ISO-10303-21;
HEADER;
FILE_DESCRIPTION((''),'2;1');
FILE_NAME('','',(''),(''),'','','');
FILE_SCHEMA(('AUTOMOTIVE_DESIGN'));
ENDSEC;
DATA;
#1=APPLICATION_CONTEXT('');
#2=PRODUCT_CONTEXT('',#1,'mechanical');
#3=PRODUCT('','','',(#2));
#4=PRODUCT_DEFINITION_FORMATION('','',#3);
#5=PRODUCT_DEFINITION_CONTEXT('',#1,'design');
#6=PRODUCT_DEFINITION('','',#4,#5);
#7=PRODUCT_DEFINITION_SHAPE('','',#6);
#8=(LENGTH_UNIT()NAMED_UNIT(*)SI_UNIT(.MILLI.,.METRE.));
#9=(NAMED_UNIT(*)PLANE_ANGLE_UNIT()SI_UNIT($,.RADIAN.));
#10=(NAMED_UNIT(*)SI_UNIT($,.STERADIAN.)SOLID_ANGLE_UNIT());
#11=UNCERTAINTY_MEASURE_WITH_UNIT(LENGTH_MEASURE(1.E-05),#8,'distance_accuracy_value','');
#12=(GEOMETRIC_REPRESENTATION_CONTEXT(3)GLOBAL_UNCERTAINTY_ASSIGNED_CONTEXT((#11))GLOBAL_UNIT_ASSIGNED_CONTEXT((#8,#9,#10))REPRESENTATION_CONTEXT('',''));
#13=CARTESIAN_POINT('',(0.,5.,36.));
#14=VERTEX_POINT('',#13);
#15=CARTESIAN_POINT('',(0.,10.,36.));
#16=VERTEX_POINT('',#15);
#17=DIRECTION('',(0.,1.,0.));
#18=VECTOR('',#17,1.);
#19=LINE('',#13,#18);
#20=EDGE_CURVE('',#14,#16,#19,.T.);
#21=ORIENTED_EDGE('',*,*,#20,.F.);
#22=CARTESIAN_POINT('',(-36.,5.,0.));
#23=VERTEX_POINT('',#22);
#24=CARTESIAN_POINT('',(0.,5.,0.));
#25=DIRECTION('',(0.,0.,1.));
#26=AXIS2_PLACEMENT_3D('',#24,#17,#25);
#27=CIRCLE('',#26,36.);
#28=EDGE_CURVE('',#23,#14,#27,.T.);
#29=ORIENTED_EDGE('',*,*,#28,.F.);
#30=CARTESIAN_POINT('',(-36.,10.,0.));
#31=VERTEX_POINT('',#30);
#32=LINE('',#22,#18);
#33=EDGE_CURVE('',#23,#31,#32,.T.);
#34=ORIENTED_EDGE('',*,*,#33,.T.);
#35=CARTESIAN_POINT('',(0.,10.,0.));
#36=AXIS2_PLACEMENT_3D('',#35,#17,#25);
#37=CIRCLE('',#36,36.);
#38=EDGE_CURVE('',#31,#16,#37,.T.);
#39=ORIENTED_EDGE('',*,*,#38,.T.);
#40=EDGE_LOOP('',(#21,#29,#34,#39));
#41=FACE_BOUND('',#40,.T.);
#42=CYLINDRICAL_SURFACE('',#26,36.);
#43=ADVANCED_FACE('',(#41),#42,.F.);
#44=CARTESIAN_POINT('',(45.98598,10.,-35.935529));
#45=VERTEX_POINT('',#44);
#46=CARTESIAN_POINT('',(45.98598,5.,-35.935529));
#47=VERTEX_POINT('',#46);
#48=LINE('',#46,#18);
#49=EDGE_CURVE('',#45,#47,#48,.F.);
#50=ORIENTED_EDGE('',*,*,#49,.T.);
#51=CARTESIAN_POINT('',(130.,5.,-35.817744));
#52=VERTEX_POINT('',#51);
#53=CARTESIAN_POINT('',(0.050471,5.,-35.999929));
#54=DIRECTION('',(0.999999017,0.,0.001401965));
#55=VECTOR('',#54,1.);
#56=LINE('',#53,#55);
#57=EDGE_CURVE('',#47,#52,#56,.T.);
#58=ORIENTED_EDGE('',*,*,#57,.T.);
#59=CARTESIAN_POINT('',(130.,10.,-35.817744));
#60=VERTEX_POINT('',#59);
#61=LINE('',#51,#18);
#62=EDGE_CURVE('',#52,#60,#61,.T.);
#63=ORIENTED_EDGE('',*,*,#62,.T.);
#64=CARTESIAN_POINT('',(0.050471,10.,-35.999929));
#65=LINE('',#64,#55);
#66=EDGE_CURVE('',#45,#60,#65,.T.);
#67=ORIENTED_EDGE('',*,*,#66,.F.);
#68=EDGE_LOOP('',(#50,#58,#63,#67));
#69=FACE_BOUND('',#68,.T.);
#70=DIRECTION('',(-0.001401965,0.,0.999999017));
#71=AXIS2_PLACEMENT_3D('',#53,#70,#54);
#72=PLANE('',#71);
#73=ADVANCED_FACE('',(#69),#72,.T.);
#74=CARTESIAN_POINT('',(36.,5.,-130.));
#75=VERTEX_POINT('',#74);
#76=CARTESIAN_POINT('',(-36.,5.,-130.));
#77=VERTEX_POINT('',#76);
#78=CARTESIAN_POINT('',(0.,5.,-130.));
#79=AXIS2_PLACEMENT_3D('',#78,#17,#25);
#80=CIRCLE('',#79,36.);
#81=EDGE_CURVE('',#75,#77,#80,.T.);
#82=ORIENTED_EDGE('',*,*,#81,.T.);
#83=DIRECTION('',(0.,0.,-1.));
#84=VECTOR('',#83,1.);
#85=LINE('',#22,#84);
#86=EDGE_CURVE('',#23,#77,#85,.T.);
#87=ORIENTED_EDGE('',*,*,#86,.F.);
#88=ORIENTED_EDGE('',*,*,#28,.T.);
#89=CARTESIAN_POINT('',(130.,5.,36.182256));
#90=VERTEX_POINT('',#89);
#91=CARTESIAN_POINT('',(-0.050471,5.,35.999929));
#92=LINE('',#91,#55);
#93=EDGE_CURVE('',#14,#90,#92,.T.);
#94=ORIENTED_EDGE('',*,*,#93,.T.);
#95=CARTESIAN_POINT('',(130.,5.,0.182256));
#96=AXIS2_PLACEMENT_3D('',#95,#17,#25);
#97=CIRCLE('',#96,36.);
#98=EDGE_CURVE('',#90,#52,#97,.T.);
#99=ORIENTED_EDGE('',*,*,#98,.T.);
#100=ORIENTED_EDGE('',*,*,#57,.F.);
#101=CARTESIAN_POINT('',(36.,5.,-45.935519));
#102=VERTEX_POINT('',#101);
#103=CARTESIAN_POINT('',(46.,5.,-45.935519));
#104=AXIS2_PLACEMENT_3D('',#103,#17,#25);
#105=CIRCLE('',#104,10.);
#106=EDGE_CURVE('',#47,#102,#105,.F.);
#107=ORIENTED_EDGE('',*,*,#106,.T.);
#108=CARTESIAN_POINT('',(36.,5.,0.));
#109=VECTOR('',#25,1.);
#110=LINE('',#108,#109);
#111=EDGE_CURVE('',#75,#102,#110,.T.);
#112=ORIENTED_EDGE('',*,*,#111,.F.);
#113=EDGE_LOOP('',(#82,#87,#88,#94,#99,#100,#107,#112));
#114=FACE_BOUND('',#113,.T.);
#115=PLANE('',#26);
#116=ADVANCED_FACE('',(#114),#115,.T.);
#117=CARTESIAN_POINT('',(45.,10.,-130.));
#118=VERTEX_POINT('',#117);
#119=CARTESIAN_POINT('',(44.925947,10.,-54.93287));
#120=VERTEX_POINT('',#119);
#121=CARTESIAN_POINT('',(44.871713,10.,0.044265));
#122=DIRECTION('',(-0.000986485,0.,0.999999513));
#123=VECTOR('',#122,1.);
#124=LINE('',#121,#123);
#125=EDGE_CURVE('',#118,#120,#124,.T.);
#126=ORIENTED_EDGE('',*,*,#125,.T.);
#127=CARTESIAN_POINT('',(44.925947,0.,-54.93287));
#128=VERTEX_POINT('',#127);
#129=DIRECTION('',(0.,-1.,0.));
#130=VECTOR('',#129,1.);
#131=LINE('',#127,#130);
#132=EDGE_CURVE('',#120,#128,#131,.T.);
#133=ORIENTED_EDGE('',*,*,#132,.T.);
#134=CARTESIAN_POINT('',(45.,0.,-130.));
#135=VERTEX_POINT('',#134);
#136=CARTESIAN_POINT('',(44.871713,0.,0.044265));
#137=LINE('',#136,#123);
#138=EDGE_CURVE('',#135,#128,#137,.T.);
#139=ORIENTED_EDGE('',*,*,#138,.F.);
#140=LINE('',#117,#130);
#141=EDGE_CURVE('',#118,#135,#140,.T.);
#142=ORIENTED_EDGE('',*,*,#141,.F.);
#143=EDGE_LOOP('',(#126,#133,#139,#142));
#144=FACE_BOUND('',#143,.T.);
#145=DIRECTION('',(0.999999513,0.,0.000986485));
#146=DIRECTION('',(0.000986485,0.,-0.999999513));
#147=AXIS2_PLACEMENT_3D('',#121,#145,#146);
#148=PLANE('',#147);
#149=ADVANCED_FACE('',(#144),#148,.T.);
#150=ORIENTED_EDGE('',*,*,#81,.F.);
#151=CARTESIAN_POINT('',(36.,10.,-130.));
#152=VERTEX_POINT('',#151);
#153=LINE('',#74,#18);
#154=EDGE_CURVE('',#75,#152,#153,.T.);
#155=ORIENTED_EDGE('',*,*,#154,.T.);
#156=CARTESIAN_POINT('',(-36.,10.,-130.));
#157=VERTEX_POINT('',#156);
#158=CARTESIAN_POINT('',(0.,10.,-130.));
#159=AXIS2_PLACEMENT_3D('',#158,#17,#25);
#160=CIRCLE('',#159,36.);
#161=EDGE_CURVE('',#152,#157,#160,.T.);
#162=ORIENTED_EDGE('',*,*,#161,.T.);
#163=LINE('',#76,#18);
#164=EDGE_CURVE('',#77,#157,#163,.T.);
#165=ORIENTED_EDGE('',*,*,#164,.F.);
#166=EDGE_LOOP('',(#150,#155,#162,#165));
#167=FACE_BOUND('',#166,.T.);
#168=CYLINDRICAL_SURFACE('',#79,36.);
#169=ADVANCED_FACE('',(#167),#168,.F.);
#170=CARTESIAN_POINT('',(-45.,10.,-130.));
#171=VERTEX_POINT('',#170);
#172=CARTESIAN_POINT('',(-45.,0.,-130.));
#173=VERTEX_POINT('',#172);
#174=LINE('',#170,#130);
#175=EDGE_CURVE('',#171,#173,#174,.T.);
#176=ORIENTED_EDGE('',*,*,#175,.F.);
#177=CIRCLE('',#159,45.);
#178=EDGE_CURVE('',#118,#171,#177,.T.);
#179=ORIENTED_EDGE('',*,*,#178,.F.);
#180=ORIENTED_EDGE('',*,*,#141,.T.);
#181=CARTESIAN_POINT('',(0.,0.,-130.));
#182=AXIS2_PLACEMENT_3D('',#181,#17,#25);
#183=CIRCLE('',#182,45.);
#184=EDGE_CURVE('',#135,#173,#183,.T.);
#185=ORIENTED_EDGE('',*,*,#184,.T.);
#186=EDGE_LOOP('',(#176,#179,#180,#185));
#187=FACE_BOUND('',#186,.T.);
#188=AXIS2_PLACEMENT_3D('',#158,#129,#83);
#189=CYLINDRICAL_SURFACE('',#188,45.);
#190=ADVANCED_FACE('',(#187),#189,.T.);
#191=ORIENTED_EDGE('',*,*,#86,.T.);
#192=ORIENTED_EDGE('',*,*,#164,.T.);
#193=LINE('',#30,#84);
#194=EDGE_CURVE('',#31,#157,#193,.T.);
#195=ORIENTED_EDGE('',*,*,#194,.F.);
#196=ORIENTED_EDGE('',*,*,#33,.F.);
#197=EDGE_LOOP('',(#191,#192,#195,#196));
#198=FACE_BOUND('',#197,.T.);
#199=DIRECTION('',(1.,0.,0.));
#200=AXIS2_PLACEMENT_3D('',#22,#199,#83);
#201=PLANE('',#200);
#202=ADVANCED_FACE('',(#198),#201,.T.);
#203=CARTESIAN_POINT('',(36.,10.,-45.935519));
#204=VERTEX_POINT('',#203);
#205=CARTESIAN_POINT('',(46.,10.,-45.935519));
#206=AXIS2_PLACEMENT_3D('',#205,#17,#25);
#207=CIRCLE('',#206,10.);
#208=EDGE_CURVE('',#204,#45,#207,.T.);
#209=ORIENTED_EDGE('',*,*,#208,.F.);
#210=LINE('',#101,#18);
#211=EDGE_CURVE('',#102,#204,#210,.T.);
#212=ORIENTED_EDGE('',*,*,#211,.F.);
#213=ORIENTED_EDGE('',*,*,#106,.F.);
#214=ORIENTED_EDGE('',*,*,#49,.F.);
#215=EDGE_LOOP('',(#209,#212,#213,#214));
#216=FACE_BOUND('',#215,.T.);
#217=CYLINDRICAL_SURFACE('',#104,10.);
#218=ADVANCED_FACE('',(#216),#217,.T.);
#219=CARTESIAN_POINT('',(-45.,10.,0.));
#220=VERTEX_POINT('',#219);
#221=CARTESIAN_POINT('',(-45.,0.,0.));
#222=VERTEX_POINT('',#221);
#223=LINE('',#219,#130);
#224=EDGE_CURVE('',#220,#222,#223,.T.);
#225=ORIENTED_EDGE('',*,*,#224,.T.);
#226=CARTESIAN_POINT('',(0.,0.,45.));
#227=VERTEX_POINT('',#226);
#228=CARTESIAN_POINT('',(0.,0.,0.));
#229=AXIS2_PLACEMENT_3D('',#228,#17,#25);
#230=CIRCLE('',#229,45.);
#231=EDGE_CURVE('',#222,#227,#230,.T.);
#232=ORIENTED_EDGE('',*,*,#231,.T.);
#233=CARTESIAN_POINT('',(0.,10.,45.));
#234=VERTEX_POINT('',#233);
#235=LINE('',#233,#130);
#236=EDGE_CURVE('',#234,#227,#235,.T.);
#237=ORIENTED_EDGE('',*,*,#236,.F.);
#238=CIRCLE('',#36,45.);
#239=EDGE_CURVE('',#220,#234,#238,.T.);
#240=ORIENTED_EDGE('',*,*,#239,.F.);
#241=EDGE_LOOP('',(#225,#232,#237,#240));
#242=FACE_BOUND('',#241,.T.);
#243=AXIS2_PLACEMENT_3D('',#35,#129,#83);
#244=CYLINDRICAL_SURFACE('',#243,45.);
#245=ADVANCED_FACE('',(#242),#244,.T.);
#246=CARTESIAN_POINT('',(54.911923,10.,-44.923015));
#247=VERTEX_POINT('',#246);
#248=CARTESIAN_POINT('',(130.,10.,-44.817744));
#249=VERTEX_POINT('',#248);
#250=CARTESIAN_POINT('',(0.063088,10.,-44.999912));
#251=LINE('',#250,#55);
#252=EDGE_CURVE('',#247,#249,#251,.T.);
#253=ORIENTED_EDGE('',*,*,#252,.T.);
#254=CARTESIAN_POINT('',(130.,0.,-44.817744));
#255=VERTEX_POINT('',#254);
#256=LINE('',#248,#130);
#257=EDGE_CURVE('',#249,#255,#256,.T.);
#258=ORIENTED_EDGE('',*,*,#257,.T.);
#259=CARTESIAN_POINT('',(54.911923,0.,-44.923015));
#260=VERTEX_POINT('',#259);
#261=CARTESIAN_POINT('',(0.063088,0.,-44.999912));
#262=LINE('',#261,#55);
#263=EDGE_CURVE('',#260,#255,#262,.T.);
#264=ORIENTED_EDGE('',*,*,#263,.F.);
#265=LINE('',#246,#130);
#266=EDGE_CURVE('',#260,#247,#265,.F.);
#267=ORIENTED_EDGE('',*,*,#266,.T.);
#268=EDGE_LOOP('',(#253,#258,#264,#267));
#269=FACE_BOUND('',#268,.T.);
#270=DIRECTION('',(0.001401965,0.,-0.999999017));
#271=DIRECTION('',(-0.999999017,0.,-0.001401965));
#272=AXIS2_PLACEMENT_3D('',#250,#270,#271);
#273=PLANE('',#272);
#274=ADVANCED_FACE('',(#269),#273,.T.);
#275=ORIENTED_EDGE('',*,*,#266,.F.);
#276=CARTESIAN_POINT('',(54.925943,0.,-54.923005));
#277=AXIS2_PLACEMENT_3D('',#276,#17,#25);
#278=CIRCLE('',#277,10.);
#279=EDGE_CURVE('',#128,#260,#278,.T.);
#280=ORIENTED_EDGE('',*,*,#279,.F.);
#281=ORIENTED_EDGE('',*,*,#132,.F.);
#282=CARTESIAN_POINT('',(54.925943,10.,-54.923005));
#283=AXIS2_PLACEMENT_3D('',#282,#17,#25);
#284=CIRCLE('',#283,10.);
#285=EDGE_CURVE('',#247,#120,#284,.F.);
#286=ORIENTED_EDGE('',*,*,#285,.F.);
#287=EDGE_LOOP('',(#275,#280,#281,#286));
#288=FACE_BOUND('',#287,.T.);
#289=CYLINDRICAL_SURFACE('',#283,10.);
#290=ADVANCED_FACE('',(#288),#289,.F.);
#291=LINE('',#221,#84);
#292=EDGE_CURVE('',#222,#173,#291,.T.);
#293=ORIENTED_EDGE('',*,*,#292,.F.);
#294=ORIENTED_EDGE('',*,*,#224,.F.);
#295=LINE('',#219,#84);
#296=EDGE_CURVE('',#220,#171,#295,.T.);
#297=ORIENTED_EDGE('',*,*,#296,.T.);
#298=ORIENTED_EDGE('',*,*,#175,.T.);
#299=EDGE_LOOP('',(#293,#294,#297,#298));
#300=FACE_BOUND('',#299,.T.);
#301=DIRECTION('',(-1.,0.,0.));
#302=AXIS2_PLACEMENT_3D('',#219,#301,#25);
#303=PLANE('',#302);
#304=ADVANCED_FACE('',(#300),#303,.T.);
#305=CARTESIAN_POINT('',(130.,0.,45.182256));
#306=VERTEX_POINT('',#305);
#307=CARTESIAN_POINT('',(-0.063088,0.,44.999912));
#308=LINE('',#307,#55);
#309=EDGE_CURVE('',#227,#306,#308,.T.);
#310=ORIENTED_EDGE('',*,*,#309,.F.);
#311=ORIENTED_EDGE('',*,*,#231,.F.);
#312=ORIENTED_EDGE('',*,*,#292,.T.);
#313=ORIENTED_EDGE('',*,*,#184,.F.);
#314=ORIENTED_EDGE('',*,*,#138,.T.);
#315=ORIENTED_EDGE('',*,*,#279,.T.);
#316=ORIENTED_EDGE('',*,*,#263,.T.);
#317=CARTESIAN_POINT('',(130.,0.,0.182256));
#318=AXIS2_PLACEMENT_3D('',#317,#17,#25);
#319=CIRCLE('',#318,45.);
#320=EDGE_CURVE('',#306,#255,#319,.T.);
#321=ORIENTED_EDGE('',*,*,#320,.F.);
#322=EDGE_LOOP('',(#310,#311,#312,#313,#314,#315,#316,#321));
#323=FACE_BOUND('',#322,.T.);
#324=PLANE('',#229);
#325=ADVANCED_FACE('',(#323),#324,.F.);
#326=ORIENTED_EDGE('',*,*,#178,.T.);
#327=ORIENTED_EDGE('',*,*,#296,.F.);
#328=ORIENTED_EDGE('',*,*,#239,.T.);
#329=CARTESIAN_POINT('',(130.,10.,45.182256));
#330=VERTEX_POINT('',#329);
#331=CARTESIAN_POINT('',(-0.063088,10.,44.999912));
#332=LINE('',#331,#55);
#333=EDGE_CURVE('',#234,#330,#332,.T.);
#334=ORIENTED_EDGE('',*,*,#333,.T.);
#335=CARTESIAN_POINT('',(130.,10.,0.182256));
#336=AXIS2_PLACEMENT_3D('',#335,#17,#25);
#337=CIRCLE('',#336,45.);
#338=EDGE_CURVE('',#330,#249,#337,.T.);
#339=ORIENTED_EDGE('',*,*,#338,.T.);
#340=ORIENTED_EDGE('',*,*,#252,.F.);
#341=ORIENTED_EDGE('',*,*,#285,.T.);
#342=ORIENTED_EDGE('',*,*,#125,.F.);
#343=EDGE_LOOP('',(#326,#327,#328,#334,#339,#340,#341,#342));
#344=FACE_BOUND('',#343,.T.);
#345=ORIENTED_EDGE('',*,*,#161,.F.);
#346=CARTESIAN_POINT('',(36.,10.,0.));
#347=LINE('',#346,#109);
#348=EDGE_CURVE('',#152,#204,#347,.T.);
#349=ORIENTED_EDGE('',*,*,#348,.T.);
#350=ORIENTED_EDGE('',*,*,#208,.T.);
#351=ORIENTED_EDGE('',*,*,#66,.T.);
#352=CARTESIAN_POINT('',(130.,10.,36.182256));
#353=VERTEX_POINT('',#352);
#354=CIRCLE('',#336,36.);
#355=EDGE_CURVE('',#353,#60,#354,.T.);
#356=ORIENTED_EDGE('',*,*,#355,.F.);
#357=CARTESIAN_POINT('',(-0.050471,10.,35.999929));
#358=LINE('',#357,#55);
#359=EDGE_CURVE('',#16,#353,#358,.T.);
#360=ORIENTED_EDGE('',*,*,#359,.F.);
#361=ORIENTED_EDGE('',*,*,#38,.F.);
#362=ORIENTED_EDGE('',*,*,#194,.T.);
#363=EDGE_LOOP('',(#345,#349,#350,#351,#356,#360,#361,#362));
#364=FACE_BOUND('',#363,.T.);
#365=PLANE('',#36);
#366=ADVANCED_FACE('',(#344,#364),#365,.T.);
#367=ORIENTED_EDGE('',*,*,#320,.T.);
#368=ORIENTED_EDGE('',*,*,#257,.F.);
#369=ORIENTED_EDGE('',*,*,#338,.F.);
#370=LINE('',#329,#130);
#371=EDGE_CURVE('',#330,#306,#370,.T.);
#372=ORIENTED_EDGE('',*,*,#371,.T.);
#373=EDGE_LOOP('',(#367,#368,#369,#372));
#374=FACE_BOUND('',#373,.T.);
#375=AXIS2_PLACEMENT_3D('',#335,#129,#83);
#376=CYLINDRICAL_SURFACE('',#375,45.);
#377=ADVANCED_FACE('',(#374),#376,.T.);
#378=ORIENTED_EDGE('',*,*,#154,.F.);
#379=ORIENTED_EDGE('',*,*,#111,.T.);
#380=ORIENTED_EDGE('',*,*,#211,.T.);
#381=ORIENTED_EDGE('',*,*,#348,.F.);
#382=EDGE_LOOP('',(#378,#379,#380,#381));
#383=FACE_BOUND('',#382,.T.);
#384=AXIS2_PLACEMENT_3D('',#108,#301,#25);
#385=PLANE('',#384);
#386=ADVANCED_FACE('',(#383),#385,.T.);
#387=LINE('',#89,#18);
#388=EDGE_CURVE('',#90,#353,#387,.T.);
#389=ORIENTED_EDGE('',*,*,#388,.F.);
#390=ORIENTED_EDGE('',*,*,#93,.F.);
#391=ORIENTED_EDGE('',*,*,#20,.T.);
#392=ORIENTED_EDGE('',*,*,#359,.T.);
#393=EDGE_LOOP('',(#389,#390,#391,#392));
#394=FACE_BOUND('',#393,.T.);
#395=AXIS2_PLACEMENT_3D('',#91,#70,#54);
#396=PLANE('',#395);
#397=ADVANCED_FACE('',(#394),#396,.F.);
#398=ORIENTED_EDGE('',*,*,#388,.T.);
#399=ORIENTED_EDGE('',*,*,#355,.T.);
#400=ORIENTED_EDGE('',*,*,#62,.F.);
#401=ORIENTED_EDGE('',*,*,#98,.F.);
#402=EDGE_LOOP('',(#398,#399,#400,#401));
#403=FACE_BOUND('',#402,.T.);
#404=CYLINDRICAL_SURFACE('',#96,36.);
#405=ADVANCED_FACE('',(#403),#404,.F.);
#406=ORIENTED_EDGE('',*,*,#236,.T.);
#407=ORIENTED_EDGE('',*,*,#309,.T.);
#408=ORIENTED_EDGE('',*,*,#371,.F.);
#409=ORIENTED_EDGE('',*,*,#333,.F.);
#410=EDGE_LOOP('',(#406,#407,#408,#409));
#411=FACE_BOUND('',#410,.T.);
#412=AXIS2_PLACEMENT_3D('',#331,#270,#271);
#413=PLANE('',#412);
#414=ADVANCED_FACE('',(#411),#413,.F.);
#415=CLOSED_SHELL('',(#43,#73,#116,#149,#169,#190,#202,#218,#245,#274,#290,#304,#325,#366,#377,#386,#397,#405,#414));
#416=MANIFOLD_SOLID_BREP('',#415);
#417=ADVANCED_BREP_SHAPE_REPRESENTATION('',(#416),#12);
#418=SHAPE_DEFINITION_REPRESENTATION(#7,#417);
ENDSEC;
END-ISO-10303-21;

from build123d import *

# Parameters (mm, degrees)
BOSS_EXTRUDE1_DEPTH = 10
CUT_EXTRUDE1_START  = -5
CUT_EXTRUDE1_DEPTH  = 5
FILLET1_R           = 10
FILLET2_R           = 10


# Read off the part's stored shape, not the designer's step: Cut-Extrude1
with BuildPart() as part:
    # Sketch1 → Boss-Extrude1 (new body)
    with BuildSketch(Plane(origin=(0, 0, 0), x_dir=(1, 0, 0), z_dir=(0, 1, 0))):
        with BuildLine():
            ThreePointArc((130, -45.182255659), (175, -0.182255659), (130, 44.817744341))
            Line((130, 44.817744341), (44.916086644, 44.937029146))
            Line((44.916086644, 44.937029146), (45, 130))
            ThreePointArc((45, 130), (0, 175), (-45, 130))
            Line((-45, 130), (-45, 0))
            ThreePointArc((-45, 0), (-31.819805153, -31.819805153), (0, -45))
            Line((0, -45), (130, -45.182255659))
        make_face()
    extrude(amount=BOSS_EXTRUDE1_DEPTH)

    # Cut-Extrude1 outline → Cut-Extrude1 (cut)
    with BuildSketch(Plane(origin=(0, 10, 0), x_dir=(1, 0, 0), z_dir=(0, 1, 0)).offset(CUT_EXTRUDE1_START)):
        with BuildLine():
            Line((36, 35.949529202), (36, 130))
            ThreePointArc((36, 130), (0, 166), (-36, 130))
            Line((-36, 130), (-36, 0))
            ThreePointArc((-36, 0), (-25.455844123, -25.455844123), (0, -36))
            Line((0, -36), (130, -36.182255659))
            ThreePointArc((130, -36.182255659), (166, -0.182255659), (130, 35.817744341))
            Line((130, 35.817744341), (36, 35.949529202))
        make_face()
    extrude(amount=CUT_EXTRUDE1_DEPTH, mode=Mode.SUBTRACT)

    # Fillet1
    fillet1_edges = [part.edges().sort_by_distance(p)[0] for p in [
        (44.916086644, 5, -44.937029146),
    ]]
    fillet(fillet1_edges, radius=FILLET1_R)

    # Fillet2
    fillet2_edges = [part.edges().sort_by_distance(p)[0] for p in [
        (36, 7.5, -35.949529202),
    ]]
    fillet(fillet2_edges, radius=FILLET2_R)


solid = part.part
